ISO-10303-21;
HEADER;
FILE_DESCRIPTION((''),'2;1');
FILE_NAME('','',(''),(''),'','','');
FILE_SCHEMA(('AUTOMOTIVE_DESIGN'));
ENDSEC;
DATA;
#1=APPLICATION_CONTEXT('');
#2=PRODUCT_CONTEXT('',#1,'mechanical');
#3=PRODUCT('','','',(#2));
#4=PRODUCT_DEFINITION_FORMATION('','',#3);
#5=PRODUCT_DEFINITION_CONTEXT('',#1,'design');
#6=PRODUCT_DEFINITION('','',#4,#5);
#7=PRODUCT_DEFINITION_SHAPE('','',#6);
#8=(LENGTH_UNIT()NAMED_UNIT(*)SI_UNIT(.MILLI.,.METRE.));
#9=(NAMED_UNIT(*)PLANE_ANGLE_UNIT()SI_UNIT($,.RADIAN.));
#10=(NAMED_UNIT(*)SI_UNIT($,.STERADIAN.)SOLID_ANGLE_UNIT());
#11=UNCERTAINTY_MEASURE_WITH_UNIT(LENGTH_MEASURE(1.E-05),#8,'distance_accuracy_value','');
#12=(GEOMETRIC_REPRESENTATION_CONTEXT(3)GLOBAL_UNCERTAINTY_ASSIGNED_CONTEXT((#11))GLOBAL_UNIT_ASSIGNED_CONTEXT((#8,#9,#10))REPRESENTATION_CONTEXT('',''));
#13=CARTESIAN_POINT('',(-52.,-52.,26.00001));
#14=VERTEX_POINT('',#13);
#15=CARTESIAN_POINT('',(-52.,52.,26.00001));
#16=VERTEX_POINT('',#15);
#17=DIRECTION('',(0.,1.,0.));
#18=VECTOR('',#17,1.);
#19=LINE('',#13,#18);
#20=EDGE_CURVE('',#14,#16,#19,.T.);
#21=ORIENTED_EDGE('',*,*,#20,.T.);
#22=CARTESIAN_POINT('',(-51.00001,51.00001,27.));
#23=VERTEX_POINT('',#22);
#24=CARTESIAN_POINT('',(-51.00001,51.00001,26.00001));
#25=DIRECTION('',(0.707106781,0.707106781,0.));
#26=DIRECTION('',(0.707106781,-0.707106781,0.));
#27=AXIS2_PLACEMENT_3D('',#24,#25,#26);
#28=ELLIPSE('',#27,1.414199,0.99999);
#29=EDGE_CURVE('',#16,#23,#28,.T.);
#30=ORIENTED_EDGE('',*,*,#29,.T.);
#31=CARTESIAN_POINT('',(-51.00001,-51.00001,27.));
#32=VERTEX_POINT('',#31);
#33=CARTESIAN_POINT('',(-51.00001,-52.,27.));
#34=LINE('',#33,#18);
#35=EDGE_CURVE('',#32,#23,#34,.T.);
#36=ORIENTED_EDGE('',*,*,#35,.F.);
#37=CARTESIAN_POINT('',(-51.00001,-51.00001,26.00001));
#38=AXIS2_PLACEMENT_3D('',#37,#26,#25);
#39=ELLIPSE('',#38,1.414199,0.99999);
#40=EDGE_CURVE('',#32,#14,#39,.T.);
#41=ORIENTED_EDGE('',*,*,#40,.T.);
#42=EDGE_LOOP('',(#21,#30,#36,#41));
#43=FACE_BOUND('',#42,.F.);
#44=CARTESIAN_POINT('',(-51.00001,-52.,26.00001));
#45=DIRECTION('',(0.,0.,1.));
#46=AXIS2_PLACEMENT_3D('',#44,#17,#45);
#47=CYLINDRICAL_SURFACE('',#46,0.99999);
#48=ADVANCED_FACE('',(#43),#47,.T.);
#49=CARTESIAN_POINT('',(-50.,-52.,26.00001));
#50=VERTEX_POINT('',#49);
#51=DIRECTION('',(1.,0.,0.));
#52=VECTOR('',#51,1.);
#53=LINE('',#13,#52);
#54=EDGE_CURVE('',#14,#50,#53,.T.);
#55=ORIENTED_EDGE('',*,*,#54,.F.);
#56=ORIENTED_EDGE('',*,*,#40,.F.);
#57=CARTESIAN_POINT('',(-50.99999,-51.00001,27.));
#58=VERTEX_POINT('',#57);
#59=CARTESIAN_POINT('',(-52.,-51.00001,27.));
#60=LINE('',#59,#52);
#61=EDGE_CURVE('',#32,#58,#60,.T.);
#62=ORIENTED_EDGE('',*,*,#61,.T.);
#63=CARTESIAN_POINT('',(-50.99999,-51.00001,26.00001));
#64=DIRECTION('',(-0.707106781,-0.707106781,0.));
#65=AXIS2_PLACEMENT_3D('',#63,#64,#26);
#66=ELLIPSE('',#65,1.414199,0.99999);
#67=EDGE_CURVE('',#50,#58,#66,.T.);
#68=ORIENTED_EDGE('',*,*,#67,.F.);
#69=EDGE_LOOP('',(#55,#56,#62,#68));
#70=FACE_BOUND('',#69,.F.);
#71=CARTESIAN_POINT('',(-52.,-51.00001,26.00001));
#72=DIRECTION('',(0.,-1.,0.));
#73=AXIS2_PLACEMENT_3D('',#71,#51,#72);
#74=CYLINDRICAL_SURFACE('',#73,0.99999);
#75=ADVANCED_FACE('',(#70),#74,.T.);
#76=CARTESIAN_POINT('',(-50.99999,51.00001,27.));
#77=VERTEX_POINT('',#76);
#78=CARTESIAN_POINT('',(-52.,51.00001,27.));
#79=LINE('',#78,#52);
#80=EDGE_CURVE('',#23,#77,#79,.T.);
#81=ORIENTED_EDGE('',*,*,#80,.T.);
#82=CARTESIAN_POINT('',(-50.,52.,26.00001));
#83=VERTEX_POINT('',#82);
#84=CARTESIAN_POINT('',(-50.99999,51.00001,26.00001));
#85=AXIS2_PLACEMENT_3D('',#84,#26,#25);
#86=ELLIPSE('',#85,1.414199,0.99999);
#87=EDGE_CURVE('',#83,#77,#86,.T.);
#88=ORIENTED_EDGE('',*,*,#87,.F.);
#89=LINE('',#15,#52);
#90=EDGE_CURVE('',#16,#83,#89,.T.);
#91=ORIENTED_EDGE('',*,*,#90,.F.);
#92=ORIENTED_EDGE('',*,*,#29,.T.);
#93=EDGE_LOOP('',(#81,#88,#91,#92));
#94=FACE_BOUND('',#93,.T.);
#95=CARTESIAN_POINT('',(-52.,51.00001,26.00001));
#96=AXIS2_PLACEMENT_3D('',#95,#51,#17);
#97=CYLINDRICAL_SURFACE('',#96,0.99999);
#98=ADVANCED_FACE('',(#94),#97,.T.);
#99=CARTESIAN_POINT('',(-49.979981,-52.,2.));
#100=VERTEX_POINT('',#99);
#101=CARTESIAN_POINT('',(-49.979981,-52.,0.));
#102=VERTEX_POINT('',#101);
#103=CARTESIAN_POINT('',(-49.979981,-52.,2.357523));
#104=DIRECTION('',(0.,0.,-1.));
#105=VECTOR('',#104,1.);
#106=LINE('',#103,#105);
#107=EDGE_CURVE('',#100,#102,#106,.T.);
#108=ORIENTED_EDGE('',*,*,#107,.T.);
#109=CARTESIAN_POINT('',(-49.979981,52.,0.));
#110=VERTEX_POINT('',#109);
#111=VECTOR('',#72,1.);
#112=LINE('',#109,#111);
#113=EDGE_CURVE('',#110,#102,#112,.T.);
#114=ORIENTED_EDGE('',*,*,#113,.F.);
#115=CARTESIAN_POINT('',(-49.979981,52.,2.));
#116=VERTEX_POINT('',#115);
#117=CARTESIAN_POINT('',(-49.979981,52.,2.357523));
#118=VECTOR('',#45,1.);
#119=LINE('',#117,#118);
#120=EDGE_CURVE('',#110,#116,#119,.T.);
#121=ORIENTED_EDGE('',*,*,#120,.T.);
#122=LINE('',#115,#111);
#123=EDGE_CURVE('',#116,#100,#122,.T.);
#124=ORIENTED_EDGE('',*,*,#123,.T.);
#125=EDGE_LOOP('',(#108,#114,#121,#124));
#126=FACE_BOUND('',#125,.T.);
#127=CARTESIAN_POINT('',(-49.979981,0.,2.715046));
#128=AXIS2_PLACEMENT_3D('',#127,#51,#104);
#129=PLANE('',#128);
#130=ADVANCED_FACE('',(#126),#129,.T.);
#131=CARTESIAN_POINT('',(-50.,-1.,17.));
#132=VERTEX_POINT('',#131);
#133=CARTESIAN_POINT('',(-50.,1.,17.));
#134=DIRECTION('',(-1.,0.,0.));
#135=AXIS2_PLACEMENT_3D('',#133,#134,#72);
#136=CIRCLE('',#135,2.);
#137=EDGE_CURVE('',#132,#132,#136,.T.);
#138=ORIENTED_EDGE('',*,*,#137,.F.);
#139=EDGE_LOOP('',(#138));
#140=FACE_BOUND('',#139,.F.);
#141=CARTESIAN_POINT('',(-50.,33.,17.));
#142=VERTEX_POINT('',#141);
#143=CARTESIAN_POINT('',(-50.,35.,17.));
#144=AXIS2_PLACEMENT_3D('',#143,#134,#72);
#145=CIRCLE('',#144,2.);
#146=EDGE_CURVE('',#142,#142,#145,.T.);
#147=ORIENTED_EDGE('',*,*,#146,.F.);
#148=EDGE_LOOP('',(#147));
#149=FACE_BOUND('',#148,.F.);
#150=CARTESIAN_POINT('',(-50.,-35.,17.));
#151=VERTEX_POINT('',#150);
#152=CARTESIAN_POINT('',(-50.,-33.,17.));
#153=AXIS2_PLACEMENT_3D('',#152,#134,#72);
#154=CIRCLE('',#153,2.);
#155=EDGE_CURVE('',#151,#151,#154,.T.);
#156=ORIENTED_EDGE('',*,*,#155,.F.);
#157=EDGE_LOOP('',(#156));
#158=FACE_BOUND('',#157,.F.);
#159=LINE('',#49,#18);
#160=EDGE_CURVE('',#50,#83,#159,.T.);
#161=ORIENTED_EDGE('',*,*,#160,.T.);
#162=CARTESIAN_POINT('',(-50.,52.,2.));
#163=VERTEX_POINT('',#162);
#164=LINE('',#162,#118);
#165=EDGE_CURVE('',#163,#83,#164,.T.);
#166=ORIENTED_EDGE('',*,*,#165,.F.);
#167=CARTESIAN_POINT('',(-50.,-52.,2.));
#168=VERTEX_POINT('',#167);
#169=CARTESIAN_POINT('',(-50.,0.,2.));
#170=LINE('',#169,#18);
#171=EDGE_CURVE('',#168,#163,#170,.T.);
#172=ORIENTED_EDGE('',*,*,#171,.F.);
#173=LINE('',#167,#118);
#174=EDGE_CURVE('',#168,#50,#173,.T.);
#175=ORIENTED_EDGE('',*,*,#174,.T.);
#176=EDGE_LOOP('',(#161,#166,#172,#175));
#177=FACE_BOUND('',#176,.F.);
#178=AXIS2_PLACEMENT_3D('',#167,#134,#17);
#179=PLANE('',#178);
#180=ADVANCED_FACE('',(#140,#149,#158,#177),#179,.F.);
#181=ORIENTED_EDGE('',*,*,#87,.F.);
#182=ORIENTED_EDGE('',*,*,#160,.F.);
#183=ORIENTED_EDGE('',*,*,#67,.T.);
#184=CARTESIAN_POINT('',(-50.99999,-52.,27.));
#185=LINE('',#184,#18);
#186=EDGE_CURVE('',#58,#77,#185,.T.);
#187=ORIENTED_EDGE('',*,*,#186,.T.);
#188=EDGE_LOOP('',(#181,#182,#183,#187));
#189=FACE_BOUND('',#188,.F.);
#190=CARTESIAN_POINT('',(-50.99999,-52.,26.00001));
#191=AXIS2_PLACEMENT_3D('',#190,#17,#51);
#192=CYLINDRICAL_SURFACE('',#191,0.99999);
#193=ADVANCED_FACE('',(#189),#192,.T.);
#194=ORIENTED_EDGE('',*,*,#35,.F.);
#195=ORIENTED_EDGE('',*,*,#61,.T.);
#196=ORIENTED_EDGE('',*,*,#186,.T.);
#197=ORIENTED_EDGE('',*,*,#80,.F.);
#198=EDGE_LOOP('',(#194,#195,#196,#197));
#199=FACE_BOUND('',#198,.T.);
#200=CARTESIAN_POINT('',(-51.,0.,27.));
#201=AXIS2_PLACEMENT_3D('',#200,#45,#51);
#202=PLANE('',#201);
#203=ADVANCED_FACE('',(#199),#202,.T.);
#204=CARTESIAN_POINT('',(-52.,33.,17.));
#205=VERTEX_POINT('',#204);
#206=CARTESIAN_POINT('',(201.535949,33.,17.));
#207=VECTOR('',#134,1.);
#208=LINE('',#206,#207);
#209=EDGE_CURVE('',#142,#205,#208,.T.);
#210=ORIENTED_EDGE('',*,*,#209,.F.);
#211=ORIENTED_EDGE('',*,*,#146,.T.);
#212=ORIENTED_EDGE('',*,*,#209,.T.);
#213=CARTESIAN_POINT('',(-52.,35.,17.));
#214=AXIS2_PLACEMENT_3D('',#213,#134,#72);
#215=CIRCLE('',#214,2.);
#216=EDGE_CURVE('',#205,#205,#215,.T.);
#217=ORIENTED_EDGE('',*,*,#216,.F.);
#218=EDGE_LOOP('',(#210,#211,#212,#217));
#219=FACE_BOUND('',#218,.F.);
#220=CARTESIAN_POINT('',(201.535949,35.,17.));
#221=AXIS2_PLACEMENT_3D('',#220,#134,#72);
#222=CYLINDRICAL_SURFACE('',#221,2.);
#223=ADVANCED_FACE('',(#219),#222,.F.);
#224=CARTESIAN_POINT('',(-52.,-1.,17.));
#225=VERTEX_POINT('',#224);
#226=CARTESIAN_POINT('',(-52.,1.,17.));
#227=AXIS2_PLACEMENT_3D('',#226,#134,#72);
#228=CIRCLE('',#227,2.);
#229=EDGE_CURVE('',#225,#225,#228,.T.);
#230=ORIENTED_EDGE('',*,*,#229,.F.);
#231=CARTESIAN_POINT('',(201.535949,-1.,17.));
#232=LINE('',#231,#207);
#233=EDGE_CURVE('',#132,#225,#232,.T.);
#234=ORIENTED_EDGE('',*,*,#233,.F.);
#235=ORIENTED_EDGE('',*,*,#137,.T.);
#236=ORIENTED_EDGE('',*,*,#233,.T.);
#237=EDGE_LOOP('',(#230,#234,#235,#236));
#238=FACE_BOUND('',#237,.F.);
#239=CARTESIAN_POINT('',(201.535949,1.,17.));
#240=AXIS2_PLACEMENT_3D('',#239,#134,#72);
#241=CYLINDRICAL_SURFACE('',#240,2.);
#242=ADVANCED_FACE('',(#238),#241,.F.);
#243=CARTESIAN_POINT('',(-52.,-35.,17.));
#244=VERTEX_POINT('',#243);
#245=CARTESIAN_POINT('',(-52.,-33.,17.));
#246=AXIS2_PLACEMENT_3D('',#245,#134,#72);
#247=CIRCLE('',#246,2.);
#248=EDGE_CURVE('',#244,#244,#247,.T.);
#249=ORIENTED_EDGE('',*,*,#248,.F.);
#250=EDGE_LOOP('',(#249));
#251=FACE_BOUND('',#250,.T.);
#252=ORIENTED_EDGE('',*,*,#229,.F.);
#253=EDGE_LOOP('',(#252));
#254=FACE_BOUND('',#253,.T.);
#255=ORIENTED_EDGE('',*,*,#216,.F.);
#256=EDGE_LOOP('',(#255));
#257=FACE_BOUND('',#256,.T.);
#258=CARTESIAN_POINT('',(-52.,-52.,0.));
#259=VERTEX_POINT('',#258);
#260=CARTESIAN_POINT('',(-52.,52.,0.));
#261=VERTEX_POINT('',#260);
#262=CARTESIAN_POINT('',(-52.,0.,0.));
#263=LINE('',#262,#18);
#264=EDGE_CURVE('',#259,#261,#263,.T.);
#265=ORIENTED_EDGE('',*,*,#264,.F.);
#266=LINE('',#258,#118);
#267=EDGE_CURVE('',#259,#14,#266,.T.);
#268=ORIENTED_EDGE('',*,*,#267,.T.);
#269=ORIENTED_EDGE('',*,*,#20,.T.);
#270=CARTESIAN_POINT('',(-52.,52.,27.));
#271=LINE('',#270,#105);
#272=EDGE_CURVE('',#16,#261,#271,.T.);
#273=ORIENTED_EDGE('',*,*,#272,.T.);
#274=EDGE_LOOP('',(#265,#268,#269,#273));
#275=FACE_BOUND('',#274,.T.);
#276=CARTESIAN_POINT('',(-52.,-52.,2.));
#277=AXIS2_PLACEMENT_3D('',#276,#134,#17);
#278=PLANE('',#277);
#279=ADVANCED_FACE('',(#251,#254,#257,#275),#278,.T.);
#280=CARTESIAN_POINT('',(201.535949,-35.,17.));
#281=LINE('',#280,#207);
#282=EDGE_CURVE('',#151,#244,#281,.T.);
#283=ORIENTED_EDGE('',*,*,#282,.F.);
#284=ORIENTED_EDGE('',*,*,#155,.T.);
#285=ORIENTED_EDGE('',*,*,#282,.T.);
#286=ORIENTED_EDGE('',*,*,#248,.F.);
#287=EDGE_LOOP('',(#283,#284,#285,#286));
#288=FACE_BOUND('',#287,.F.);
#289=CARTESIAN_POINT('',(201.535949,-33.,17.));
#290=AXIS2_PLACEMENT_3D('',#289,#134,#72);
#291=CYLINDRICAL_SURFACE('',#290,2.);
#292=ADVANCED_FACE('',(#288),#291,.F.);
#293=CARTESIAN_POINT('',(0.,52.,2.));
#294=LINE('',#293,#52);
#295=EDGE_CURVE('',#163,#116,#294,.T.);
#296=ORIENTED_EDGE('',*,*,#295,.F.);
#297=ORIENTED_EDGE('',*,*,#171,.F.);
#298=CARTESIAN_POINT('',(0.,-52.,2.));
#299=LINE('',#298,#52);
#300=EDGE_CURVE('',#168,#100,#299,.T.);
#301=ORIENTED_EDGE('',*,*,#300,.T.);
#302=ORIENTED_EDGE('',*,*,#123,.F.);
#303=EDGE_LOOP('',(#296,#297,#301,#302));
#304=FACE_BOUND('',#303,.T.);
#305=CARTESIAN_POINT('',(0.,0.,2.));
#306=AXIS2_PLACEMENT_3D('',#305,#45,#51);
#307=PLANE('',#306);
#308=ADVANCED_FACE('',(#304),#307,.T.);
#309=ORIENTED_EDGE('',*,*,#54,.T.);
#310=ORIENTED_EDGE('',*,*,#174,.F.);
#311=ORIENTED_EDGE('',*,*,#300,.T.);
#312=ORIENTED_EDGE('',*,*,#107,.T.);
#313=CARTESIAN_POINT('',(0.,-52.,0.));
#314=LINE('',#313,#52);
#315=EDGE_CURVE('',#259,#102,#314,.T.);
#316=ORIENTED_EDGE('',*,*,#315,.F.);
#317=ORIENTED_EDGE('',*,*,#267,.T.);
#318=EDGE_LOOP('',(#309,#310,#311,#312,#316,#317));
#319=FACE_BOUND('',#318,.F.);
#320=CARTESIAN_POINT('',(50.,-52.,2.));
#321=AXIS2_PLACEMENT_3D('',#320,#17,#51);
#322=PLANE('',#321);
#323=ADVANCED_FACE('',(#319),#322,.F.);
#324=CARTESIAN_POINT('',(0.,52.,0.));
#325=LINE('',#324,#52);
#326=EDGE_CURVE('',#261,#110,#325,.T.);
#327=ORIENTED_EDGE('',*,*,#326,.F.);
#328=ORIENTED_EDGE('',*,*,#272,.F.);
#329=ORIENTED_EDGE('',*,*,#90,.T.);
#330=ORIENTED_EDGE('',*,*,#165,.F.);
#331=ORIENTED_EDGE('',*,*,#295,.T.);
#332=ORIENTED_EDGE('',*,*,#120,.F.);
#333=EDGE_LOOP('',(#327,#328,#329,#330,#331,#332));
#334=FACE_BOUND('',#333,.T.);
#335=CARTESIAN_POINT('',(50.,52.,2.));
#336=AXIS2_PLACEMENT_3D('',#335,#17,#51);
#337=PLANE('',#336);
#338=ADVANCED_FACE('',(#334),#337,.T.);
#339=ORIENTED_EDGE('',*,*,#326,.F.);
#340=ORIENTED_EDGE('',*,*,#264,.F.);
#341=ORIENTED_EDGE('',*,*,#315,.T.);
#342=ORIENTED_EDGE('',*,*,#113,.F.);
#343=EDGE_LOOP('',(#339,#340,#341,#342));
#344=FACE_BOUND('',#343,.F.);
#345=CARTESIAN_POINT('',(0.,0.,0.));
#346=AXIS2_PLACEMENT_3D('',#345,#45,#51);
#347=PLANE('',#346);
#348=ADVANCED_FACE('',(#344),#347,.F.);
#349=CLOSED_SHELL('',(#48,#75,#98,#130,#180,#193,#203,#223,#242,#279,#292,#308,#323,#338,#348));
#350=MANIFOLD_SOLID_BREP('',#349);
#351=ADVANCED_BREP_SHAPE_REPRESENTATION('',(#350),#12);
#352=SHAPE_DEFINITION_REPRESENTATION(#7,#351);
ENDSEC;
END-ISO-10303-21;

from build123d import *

# Parameters (mm, degrees)
F0_W      = 104
F0_H      = 104
F1_DEPTH  = 2
F2_W      = 2
F2_H      = 104
F3_DEPTH  = 25
F4_W      = 2
F4_H      = 104
F5_DEPTH  = 25
F6_R      = 0.99999
F7_R      = 0.99999
F9_D      = 4
F11_D     = 4
F13_D     = 4
F15_DEPTH = 500
F16_DEPTH = 505


# Not quite as in the source:
# - a fillet or chamfer is up to 0.001 mm smaller than in the source, because OpenCascade refuses the exact size


with BuildPart() as f1:
    # F0 (on Top) → F1 (new body)
    with BuildSketch(Plane.XY):
        Rectangle(F0_W, F0_H)
    extrude(amount=F1_DEPTH)

    # F2 (on face) → F3 (join)
    with BuildSketch(Plane.XY.offset(2)):
        with Locations((-51, 0)):
            Rectangle(F2_W, F2_H)
    extrude(amount=F3_DEPTH)

    # F4 (on face) → F5 (join)
    with BuildSketch(Plane.XY.offset(2)):
        with Locations((51, 0)):
            Rectangle(F4_W, F4_H)
    extrude(amount=F5_DEPTH)

    # F6 (radius 1 in the source; OpenCascade refuses exactly that, so slightly less here)
    f6_edges = [f1.edges().sort_by_distance(p)[0] for p in [
        (52, 0, 27),
        (51, 52, 27),
        (50, 0, 27),
        (51, -52, 27),
    ]]
    fillet(f6_edges, radius=F6_R)

    # F7 (radius 1 in the source; OpenCascade refuses exactly that, so slightly less here)
    f7_edges = [f1.edges().sort_by_distance(p)[0] for p in [
        (-51, 52, 27),
        (-52, 0, 27),
        (-51, -52, 27),
        (-50, 0, 27),
    ]]
    fillet(f7_edges, radius=F7_R)

    # F9 (through all)
    with Locations(Plane.YZ.offset(52)):
        with Locations((-33, 17)):
            Hole(F9_D / 2)

    # F11 (through all)
    with Locations(Plane.YZ.offset(52)):
        with Locations((1, 17)):
            Hole(F11_D / 2)

    # F13 (through all)
    with Locations(Plane.YZ.offset(52)):
        with Locations((35, 17)):
            Hole(F13_D / 2)

    # F14 (on Front) → F15 (cut)
    with BuildSketch(Plane.XZ):
        Polygon((74.380248785, 39.0327088535), (-49.979981035, 2.7150458191), (-49.979981035, 0), (-49.979981035, -1.495702425), (74.380248785, -1.495702425), align=None)
    extrude(amount=F15_DEPTH, mode=Mode.SUBTRACT)

    # F14 (on Front) → F16 (cut)
    with BuildSketch(Plane.XZ):
        Polygon((74.380248785, 39.0327088535), (-49.979981035, 2.7150458191), (-49.979981035, 0), (-49.979981035, -1.495702425), (74.380248785, -1.495702425), align=None)
    extrude(amount=-F16_DEPTH, mode=Mode.SUBTRACT)


solid = f1.part
